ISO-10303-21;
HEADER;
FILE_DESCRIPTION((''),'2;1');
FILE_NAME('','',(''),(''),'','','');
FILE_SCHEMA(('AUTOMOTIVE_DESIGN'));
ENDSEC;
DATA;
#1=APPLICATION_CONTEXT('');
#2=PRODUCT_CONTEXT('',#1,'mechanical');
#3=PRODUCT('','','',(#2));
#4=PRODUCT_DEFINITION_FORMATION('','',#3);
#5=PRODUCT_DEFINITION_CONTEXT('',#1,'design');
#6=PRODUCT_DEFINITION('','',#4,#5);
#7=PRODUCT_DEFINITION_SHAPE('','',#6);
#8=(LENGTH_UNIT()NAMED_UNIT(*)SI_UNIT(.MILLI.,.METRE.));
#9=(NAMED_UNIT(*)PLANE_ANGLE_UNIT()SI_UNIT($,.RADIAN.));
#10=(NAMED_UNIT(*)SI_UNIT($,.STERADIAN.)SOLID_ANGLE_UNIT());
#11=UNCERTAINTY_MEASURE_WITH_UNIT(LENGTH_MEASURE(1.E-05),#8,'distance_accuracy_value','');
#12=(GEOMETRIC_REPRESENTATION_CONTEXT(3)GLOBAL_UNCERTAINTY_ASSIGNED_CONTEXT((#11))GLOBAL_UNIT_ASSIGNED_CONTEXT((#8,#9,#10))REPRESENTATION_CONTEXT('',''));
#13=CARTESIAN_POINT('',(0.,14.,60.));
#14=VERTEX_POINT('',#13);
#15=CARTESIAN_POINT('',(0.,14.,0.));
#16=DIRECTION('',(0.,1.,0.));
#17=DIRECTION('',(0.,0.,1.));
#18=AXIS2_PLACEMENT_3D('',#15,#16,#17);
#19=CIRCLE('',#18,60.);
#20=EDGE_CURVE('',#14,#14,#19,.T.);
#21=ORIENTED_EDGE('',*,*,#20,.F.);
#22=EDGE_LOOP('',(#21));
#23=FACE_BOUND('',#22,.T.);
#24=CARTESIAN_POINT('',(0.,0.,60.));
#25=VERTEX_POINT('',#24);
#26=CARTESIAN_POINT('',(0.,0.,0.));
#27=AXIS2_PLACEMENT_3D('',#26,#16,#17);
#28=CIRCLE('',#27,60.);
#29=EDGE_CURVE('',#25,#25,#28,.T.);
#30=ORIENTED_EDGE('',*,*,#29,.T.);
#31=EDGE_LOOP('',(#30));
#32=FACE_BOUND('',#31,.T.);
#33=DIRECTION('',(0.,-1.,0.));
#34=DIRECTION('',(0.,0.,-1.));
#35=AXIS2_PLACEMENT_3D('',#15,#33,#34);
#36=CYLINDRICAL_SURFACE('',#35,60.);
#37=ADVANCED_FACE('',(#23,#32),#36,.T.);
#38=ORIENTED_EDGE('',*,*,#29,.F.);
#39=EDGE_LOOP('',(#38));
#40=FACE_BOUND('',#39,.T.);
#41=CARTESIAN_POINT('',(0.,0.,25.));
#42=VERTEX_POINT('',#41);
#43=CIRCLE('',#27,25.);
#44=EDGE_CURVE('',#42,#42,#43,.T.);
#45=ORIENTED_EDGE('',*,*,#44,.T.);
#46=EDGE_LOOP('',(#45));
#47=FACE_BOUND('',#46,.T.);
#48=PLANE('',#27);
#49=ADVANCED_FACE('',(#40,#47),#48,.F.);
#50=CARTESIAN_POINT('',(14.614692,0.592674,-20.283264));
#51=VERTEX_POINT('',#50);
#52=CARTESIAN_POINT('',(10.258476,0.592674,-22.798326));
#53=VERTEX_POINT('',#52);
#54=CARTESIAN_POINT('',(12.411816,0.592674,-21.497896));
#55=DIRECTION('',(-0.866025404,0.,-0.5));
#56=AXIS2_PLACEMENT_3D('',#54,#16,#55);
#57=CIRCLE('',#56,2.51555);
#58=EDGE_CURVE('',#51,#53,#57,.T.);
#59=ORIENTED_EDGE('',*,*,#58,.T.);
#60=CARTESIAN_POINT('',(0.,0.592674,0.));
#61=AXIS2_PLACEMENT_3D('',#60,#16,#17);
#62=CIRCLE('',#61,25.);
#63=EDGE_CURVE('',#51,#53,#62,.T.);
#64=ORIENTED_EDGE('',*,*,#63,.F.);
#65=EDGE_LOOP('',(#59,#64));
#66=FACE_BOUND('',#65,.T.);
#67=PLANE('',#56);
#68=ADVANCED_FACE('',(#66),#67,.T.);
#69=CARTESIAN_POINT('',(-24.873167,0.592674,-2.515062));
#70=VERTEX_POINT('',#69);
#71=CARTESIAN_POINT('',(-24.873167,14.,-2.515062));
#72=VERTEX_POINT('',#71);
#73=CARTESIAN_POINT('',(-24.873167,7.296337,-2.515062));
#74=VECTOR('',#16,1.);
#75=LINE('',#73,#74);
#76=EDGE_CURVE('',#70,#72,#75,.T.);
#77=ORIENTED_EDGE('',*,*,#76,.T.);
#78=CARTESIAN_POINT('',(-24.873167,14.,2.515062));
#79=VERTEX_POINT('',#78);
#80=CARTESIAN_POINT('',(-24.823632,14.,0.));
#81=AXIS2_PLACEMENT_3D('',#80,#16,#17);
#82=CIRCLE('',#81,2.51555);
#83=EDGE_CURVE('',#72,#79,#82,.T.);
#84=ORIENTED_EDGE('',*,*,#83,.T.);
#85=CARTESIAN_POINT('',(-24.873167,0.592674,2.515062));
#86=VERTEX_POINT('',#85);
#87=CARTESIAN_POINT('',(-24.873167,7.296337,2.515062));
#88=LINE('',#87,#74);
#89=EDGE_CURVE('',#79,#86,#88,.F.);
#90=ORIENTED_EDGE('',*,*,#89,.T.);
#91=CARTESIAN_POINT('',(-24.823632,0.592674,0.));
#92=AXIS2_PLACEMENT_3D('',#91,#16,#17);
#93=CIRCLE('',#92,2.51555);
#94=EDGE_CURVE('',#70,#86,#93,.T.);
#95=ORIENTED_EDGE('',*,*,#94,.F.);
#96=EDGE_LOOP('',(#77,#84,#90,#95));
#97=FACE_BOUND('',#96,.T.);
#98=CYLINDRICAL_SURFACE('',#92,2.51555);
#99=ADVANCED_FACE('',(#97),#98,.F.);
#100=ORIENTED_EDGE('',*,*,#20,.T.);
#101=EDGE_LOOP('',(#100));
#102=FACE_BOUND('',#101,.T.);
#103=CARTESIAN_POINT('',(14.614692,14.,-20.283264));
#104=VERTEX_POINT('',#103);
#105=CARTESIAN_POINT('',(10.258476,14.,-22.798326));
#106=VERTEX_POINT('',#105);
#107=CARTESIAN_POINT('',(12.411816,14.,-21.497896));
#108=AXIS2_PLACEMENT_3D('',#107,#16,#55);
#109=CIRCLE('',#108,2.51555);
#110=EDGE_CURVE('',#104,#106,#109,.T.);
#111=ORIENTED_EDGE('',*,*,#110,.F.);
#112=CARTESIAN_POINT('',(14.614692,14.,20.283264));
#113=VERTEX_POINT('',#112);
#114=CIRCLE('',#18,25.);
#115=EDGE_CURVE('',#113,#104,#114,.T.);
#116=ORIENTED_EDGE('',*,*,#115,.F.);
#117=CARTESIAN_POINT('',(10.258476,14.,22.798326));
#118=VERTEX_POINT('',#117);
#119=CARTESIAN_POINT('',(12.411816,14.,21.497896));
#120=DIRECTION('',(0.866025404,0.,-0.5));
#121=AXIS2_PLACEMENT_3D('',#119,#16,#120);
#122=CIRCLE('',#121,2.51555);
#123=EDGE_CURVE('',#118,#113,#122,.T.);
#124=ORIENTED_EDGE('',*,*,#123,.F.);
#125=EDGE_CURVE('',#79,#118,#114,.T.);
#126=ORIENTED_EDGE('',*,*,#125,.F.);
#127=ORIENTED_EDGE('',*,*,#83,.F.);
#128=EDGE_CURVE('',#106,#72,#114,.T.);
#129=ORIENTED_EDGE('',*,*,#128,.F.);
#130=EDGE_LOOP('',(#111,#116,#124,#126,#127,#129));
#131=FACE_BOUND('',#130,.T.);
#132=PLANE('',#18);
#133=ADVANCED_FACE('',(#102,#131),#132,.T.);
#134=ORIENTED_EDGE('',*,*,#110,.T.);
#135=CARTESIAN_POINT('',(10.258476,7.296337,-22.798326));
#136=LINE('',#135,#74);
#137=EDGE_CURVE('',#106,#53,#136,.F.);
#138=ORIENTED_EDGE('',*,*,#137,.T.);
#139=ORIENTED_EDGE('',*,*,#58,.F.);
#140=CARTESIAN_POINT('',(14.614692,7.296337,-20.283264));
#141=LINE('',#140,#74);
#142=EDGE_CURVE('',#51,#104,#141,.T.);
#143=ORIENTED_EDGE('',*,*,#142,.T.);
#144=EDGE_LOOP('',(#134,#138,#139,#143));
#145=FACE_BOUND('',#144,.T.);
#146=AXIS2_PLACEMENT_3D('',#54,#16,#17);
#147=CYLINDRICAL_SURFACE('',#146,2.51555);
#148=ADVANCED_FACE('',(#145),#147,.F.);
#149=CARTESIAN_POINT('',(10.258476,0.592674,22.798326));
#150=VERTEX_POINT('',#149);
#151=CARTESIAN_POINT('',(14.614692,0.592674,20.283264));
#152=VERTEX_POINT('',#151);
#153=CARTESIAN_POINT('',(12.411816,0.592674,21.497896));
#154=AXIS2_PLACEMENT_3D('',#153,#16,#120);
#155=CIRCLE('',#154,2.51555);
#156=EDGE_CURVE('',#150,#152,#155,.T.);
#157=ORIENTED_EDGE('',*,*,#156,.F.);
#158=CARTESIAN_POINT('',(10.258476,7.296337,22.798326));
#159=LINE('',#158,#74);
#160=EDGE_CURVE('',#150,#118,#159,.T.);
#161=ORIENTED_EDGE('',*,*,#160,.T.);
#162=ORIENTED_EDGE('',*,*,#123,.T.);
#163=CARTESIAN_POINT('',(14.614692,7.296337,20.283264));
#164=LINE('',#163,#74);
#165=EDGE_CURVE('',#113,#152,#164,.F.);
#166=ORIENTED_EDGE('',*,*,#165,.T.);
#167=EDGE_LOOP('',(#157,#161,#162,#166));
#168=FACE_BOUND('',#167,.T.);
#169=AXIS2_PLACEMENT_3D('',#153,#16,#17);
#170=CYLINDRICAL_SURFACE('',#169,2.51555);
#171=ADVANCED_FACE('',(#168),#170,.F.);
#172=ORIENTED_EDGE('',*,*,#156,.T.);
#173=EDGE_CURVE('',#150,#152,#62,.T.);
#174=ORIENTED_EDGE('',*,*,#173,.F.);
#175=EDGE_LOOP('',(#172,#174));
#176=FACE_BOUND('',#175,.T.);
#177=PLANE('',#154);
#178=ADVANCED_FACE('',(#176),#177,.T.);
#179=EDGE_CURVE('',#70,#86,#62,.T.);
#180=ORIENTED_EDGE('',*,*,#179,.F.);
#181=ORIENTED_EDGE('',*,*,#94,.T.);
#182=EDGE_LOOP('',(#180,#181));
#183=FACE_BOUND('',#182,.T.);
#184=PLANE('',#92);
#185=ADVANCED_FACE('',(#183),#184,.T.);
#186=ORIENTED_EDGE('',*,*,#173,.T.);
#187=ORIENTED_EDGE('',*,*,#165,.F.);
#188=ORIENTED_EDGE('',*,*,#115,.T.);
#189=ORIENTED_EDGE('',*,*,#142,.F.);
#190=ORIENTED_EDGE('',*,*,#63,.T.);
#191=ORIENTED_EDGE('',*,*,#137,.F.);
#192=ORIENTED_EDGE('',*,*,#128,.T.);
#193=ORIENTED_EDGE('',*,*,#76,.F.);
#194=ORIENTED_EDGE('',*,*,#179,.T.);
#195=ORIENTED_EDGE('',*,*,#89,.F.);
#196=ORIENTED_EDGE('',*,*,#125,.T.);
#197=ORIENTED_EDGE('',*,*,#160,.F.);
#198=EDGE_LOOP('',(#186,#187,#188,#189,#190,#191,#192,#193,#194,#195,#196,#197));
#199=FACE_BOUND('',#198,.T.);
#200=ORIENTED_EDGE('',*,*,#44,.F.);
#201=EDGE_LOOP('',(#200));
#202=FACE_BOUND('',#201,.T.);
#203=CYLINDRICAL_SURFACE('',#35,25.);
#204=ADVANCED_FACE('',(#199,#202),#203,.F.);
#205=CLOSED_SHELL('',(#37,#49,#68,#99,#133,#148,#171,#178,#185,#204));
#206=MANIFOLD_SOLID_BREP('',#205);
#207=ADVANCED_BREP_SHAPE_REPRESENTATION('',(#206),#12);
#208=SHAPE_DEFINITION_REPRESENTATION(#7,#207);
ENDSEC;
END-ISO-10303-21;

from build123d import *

# Parameters (mm, degrees)
SKETCH1_R           = 60
BOSS_EXTRUDE1_DEPTH = 14
SKETCH2_R           = 25
CUT_EXTRUDE1_DEPTH  = 87
SKETCH3_R           = 2.515550123
CUT_EXTRUDE2_DEPTH  = 13.40732612
CIRPATTERN1_COUNT   = 3


with BuildPart() as part:
    # Sketch1 → Boss-Extrude1 (new body)
    with BuildSketch(Plane(origin=(0, 0, 0), x_dir=(1, 0, 0), z_dir=(0, 1, 0))):
        Circle(SKETCH1_R)
    extrude(amount=BOSS_EXTRUDE1_DEPTH)

    # Sketch2 → Cut-Extrude1 (cut, through all)
    with BuildSketch(Plane(origin=(0, 0, 0), x_dir=(1, 0, 0), z_dir=(0, 1, 0))):
        Circle(SKETCH2_R)
    extrude(amount=CUT_EXTRUDE1_DEPTH, mode=Mode.SUBTRACT)

    # Sketch3 → Cut-Extrude2 (cut)
    with BuildSketch(Plane(origin=(0, 14, 0), x_dir=(1, 0, 0), z_dir=(0, 1, 0))):
        with Locations((-24.823631988, 0)):
            Circle(SKETCH3_R)
    cut_extrude2 = extrude(amount=-CUT_EXTRUDE2_DEPTH, mode=Mode.SUBTRACT)

    # CirPattern1: Cut-Extrude2 ×3 about axis
    cirpattern1_axis = Axis((0, 0, 0), (0, 1, 0))
    for i in range(1, CIRPATTERN1_COUNT):
        add(cut_extrude2.rotate(cirpattern1_axis, i * 360 / CIRPATTERN1_COUNT), mode=Mode.SUBTRACT)


solid = part.part
